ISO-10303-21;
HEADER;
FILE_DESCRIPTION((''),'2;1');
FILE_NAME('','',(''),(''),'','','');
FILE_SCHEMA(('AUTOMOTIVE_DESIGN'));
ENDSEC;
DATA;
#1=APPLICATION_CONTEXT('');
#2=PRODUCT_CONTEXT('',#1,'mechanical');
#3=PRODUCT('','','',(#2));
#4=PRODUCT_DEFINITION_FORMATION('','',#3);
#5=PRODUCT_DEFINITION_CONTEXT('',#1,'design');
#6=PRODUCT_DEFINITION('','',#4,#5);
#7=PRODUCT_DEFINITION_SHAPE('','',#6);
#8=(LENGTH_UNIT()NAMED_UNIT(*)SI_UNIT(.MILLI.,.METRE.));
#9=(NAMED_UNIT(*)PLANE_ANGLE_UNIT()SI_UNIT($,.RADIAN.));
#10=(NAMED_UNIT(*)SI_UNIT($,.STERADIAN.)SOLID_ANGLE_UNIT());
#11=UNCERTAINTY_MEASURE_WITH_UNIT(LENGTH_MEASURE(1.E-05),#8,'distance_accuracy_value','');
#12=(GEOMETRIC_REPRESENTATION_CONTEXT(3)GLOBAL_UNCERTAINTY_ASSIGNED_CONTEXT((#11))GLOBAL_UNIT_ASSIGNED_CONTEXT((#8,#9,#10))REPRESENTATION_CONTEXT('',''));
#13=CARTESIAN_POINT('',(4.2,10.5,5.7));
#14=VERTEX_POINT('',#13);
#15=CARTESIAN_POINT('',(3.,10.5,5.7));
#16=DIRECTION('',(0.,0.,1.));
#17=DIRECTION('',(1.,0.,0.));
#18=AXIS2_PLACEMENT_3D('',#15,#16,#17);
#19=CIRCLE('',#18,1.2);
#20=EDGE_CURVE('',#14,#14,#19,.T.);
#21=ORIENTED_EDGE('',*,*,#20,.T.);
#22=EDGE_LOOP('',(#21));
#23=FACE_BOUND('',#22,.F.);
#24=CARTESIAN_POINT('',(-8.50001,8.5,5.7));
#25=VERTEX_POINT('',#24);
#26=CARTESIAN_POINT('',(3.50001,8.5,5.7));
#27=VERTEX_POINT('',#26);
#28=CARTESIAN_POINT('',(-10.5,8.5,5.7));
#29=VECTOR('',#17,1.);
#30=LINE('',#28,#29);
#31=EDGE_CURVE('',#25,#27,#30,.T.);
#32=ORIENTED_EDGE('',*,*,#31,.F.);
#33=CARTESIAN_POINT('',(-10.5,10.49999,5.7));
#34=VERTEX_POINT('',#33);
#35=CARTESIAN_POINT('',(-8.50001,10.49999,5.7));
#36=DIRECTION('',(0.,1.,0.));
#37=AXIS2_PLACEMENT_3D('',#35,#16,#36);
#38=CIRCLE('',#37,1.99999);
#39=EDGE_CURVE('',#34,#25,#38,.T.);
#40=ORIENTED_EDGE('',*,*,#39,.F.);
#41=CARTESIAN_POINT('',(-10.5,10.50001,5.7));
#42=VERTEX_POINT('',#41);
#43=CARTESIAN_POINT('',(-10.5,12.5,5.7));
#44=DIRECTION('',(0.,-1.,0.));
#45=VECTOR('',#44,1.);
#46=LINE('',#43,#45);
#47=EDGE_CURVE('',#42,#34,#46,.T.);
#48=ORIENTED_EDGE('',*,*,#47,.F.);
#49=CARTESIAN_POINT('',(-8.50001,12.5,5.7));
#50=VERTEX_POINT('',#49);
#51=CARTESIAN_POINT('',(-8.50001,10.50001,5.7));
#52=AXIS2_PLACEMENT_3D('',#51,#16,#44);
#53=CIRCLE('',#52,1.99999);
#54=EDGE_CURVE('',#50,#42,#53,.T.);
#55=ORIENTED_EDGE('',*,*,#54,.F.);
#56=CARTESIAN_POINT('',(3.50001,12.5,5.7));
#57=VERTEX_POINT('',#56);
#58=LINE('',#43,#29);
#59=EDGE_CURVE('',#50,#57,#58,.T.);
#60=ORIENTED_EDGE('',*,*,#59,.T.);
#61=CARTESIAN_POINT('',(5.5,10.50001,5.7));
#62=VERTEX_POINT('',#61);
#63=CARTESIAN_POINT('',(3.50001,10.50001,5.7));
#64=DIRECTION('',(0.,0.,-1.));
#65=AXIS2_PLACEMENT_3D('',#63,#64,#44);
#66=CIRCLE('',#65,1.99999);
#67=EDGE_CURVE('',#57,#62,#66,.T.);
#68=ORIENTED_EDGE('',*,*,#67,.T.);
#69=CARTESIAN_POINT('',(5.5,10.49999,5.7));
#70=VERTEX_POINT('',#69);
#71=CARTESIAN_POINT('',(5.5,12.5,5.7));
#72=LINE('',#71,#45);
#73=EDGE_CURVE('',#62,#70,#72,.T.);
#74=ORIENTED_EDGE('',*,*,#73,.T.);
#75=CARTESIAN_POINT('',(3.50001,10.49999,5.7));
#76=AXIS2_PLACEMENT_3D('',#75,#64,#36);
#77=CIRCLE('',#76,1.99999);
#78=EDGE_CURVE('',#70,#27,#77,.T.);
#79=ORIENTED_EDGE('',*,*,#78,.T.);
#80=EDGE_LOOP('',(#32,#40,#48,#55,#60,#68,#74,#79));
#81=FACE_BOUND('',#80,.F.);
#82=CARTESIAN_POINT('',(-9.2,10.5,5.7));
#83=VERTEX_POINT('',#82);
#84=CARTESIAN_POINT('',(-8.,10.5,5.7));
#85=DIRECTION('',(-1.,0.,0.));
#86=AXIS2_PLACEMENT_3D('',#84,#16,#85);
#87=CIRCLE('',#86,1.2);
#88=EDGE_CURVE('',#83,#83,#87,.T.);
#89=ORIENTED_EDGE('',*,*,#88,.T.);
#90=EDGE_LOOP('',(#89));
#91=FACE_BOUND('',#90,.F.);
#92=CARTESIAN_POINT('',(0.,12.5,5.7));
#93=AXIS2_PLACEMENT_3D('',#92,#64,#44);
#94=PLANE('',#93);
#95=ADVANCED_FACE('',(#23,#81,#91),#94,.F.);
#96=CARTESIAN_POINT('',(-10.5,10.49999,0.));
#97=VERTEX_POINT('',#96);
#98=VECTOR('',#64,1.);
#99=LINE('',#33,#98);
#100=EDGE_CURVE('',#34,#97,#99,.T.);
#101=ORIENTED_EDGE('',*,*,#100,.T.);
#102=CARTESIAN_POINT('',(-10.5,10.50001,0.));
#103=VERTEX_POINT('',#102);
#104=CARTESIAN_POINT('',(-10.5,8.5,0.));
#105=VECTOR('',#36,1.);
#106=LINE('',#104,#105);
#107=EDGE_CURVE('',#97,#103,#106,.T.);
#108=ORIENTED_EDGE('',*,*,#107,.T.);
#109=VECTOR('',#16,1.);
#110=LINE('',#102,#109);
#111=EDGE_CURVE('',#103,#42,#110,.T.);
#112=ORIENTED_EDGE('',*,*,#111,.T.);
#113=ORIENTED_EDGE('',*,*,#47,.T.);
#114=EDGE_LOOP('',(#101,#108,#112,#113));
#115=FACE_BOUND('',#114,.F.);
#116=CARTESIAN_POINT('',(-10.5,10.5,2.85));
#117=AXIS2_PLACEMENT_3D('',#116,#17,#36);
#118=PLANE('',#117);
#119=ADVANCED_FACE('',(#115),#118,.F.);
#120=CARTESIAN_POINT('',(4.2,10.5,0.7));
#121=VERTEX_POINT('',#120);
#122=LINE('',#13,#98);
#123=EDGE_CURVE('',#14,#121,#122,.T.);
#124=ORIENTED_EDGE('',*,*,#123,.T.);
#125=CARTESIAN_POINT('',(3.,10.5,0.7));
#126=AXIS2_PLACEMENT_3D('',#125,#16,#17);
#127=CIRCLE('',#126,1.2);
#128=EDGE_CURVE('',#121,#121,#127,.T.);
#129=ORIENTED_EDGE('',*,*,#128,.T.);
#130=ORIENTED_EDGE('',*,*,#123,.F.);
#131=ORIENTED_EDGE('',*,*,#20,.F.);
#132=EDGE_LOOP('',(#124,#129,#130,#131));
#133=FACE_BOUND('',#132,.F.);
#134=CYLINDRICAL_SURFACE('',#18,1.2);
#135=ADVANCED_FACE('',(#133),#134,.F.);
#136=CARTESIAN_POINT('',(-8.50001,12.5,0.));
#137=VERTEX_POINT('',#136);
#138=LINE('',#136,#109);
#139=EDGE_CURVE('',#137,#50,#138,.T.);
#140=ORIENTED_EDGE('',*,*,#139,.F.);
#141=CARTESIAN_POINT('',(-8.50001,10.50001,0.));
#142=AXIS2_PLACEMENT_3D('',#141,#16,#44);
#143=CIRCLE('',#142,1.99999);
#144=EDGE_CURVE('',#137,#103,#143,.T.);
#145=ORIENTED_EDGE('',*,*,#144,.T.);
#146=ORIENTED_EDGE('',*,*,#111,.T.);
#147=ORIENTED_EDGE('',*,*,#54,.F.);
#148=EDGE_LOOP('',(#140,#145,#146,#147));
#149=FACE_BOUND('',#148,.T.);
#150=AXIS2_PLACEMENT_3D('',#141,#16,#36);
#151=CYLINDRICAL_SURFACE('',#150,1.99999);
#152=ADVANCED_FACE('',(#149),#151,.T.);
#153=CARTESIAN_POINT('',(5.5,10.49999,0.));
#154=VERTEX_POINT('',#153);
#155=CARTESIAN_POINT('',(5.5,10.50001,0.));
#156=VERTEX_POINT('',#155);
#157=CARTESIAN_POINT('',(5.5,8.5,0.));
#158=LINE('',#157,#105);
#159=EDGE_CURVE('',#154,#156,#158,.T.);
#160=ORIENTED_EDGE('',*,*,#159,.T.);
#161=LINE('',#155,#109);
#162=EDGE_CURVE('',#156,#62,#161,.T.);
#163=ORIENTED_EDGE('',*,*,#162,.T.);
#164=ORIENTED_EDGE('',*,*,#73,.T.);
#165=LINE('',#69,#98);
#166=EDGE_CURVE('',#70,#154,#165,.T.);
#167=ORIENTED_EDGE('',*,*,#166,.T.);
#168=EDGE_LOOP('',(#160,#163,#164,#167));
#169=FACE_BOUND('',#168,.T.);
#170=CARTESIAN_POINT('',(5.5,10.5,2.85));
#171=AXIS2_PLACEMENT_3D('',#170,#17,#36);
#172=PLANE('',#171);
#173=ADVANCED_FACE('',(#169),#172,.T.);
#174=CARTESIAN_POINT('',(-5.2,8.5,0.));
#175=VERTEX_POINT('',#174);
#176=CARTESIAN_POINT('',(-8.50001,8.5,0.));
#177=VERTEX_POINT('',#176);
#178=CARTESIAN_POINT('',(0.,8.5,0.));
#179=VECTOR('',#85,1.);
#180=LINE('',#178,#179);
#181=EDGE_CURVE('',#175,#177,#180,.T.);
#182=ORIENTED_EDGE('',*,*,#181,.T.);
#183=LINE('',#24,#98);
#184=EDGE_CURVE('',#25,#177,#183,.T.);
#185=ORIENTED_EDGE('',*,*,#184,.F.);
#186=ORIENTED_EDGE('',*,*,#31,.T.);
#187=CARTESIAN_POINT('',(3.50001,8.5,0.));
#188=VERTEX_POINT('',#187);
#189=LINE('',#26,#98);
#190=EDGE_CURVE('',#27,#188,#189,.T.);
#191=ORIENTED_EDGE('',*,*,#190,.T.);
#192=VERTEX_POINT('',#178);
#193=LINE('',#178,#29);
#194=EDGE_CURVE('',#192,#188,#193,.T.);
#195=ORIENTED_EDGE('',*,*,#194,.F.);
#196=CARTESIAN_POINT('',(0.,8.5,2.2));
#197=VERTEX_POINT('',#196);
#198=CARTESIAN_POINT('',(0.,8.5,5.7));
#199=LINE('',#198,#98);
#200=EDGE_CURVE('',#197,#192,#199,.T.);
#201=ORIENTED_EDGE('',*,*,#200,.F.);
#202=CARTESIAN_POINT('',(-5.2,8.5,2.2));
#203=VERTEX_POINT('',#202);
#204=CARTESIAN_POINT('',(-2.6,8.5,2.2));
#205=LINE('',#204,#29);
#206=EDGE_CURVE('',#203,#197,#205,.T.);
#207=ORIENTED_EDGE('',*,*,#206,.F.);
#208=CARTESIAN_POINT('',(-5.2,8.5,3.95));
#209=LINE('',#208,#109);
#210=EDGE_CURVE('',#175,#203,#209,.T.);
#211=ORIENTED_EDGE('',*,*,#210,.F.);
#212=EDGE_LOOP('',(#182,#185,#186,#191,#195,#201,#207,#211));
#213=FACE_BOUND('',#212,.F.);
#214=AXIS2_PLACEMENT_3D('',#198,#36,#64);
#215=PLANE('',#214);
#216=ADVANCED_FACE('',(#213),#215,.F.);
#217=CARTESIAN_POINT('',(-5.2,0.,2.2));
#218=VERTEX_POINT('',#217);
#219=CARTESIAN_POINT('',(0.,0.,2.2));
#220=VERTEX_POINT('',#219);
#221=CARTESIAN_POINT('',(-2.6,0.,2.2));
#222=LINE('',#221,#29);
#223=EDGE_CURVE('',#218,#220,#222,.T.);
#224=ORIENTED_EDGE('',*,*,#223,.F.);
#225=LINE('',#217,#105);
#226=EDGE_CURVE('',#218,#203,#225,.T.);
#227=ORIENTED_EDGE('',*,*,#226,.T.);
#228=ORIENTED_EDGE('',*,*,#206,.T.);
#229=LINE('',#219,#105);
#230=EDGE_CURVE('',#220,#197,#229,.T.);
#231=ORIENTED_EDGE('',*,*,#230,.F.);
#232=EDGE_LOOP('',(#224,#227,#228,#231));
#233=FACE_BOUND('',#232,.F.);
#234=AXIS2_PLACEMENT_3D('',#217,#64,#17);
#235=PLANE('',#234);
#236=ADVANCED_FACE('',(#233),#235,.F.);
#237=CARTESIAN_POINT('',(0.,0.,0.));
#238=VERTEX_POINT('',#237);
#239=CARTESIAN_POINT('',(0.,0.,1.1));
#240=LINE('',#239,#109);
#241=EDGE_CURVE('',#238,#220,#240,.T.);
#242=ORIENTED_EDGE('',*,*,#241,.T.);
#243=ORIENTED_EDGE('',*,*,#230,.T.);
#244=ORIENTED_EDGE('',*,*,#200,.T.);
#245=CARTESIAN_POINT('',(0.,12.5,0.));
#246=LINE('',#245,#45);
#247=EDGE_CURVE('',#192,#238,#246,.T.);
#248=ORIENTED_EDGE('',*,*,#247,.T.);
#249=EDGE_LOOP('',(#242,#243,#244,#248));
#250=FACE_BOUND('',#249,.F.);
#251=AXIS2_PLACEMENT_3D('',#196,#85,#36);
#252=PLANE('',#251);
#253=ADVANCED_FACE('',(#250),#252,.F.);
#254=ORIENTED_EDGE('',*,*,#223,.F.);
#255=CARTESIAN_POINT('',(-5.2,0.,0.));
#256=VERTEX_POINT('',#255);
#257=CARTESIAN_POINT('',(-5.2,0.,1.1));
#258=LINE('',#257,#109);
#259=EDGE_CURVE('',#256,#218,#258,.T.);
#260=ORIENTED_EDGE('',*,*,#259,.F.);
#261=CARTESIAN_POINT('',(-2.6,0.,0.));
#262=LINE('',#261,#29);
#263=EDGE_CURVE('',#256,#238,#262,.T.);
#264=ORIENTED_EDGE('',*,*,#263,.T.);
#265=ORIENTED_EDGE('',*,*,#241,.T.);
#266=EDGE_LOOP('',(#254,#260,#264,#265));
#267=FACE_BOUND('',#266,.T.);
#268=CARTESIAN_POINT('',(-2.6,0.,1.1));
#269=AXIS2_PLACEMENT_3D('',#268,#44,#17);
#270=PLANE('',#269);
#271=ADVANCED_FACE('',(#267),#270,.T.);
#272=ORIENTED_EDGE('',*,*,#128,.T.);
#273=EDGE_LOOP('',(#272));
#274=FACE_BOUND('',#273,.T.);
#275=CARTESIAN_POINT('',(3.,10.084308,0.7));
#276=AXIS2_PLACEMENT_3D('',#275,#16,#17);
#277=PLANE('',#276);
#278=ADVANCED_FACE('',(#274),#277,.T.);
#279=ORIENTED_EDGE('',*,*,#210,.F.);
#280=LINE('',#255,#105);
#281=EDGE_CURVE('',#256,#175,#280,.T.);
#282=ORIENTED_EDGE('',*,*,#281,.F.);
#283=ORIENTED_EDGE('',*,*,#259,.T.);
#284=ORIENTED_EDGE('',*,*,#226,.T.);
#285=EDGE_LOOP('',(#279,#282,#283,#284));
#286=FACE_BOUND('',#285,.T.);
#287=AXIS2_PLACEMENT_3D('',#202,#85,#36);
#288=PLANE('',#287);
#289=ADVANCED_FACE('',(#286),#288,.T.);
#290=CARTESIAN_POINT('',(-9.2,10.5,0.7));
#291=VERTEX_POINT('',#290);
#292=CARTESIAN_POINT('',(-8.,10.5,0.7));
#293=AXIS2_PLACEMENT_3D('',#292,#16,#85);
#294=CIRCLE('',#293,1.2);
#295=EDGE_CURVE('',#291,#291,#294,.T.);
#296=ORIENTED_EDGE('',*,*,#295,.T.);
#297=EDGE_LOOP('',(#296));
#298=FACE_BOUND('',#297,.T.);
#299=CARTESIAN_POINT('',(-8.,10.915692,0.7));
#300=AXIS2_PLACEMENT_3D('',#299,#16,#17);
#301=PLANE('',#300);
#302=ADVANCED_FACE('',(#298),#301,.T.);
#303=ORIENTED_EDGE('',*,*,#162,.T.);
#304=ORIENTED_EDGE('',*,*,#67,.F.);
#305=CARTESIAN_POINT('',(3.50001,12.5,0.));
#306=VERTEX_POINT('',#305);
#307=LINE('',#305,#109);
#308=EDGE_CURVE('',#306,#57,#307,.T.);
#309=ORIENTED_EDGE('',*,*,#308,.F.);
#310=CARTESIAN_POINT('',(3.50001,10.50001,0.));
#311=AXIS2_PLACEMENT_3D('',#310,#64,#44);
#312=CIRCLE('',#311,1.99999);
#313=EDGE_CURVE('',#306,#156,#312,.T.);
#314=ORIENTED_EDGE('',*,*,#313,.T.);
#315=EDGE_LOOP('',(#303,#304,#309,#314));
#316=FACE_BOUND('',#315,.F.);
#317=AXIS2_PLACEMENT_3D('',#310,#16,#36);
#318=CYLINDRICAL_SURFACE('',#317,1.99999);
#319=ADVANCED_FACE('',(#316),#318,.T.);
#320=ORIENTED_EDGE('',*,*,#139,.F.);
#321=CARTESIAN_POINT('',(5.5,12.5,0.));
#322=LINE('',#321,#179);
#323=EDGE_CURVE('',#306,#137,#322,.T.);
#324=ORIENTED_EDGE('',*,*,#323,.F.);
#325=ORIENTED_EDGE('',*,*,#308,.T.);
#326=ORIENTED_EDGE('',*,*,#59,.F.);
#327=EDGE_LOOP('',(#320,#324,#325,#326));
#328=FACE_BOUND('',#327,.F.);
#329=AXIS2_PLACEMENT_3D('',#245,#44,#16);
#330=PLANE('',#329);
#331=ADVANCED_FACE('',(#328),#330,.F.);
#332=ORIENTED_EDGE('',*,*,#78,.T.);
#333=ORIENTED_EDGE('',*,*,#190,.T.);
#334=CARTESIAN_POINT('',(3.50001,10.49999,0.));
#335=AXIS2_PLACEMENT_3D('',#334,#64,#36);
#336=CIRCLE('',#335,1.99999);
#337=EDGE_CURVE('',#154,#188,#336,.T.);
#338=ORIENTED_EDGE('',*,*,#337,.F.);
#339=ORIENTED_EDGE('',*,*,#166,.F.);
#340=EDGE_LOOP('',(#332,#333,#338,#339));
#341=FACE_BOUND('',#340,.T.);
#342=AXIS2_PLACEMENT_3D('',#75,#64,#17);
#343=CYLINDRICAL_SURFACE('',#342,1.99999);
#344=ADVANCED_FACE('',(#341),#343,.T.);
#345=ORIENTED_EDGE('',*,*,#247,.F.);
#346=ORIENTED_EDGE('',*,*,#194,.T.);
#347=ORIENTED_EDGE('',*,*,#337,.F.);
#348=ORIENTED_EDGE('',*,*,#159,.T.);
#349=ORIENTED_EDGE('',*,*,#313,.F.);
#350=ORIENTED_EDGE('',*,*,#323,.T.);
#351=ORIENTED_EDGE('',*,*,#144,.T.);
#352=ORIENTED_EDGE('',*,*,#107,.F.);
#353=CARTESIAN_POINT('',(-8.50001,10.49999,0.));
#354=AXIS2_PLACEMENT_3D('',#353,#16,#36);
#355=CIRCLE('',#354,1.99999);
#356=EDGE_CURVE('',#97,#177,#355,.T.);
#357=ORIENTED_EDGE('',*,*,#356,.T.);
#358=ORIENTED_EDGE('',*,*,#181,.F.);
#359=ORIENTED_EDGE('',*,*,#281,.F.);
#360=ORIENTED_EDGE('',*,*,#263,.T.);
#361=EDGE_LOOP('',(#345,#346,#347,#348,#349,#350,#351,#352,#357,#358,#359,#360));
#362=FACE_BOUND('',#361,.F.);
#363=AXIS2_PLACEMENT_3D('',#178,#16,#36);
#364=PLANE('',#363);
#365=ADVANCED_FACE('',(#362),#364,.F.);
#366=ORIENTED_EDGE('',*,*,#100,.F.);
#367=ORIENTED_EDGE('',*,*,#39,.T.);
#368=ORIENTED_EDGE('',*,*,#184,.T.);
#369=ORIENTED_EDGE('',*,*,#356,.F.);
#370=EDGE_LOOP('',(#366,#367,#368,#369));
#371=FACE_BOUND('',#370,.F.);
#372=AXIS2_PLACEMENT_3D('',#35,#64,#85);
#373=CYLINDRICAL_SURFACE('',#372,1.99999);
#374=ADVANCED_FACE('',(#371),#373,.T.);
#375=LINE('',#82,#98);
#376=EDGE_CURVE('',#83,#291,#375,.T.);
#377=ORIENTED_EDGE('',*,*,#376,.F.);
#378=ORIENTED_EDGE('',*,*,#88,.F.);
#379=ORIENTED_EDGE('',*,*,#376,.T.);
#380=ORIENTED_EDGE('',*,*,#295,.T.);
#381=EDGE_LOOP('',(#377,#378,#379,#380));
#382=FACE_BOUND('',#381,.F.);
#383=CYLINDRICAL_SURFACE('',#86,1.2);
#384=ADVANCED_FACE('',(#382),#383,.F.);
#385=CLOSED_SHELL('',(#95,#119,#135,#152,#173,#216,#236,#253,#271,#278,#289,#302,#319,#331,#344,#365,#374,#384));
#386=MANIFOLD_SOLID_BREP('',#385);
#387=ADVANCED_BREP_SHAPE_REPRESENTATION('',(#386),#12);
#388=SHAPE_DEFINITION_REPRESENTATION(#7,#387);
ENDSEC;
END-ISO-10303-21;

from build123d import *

# Parameters (mm, degrees)
F0_W          = 5.2
F0_H          = 2.2
F1_DEPTH      = 12.5
F2_W          = 5.2
F2_H          = 4
F3_DEPTH      = 3.5
F5_DEPTH      = 10.5
F5_DEPTH_BACK = 5.5
F7_DEPTH      = 5
F8_R          = 1.99999


# Not quite as in the source:
# - a fillet or chamfer is up to 0.001 mm smaller than in the source, because OpenCascade refuses the exact size


with BuildPart() as f1:
    # F0 (on Front) → F1 (new body)
    with BuildSketch(Plane.XZ):
        with Locations((-2.6, 1.1)):
            Rectangle(F0_W, F0_H)
    extrude(amount=-F1_DEPTH)

    # F2 (on face) → F3 (join)
    with BuildSketch(Plane.XY.offset(2.2)):
        with Locations((-2.6, 10.5)):
            Rectangle(F2_W, F2_H)
    extrude(amount=F3_DEPTH)

    # F4 (on face) → F5 (join, two sides)
    with BuildSketch(Plane.YZ) as f5_sk:
        Polygon((12.5, 0), (12.5, 5.7), (8.5, 5.7), (8.5, 2.2), (8.5, 0), align=None)
    extrude(amount=-F5_DEPTH)
    extrude(f5_sk.sketch, amount=F5_DEPTH_BACK)

    # F6 (on face) → F7 (cut)
    with BuildSketch(Plane.XY.offset(5.7)):
        with BuildLine():
            Line((-9.2, 10.5), (-8, 10.5))
            Line((-8, 10.5), (-6.8, 10.5))
            ThreePointArc((-6.8, 10.5), (-8, 11.7), (-9.2, 10.5))
        make_face()
        with BuildLine():
            Line((-6.8, 10.5), (-8, 10.5))
            Line((-8, 10.5), (-9.2, 10.5))
            ThreePointArc((-9.2, 10.5), (-8, 9.3), (-6.8, 10.5))
        make_face()
        with BuildLine():
            Line((3, 10.5), (1.8, 10.5))
            ThreePointArc((1.8, 10.5), (3, 9.3), (4.2, 10.5))
            Line((4.2, 10.5), (3, 10.5))
        make_face()
        with BuildLine():
            ThreePointArc((4.2, 10.5), (3, 11.7), (1.8, 10.5))
            Line((1.8, 10.5), (3, 10.5))
            Line((3, 10.5), (4.2, 10.5))
        make_face()
    extrude(amount=-F7_DEPTH, mode=Mode.SUBTRACT)

    # F8 (radius 2 in the source; OpenCascade refuses exactly that, so slightly less here)
    f8_edges = [f1.edges().sort_by_distance(p)[0] for p in [
        (5.5, 8.5, 2.85),
        (5.5, 12.5, 2.85),
        (-10.5, 12.5, 2.85),
        (-10.5, 8.5, 2.85),
    ]]
    fillet(f8_edges, radius=F8_R)


solid = f1.part
